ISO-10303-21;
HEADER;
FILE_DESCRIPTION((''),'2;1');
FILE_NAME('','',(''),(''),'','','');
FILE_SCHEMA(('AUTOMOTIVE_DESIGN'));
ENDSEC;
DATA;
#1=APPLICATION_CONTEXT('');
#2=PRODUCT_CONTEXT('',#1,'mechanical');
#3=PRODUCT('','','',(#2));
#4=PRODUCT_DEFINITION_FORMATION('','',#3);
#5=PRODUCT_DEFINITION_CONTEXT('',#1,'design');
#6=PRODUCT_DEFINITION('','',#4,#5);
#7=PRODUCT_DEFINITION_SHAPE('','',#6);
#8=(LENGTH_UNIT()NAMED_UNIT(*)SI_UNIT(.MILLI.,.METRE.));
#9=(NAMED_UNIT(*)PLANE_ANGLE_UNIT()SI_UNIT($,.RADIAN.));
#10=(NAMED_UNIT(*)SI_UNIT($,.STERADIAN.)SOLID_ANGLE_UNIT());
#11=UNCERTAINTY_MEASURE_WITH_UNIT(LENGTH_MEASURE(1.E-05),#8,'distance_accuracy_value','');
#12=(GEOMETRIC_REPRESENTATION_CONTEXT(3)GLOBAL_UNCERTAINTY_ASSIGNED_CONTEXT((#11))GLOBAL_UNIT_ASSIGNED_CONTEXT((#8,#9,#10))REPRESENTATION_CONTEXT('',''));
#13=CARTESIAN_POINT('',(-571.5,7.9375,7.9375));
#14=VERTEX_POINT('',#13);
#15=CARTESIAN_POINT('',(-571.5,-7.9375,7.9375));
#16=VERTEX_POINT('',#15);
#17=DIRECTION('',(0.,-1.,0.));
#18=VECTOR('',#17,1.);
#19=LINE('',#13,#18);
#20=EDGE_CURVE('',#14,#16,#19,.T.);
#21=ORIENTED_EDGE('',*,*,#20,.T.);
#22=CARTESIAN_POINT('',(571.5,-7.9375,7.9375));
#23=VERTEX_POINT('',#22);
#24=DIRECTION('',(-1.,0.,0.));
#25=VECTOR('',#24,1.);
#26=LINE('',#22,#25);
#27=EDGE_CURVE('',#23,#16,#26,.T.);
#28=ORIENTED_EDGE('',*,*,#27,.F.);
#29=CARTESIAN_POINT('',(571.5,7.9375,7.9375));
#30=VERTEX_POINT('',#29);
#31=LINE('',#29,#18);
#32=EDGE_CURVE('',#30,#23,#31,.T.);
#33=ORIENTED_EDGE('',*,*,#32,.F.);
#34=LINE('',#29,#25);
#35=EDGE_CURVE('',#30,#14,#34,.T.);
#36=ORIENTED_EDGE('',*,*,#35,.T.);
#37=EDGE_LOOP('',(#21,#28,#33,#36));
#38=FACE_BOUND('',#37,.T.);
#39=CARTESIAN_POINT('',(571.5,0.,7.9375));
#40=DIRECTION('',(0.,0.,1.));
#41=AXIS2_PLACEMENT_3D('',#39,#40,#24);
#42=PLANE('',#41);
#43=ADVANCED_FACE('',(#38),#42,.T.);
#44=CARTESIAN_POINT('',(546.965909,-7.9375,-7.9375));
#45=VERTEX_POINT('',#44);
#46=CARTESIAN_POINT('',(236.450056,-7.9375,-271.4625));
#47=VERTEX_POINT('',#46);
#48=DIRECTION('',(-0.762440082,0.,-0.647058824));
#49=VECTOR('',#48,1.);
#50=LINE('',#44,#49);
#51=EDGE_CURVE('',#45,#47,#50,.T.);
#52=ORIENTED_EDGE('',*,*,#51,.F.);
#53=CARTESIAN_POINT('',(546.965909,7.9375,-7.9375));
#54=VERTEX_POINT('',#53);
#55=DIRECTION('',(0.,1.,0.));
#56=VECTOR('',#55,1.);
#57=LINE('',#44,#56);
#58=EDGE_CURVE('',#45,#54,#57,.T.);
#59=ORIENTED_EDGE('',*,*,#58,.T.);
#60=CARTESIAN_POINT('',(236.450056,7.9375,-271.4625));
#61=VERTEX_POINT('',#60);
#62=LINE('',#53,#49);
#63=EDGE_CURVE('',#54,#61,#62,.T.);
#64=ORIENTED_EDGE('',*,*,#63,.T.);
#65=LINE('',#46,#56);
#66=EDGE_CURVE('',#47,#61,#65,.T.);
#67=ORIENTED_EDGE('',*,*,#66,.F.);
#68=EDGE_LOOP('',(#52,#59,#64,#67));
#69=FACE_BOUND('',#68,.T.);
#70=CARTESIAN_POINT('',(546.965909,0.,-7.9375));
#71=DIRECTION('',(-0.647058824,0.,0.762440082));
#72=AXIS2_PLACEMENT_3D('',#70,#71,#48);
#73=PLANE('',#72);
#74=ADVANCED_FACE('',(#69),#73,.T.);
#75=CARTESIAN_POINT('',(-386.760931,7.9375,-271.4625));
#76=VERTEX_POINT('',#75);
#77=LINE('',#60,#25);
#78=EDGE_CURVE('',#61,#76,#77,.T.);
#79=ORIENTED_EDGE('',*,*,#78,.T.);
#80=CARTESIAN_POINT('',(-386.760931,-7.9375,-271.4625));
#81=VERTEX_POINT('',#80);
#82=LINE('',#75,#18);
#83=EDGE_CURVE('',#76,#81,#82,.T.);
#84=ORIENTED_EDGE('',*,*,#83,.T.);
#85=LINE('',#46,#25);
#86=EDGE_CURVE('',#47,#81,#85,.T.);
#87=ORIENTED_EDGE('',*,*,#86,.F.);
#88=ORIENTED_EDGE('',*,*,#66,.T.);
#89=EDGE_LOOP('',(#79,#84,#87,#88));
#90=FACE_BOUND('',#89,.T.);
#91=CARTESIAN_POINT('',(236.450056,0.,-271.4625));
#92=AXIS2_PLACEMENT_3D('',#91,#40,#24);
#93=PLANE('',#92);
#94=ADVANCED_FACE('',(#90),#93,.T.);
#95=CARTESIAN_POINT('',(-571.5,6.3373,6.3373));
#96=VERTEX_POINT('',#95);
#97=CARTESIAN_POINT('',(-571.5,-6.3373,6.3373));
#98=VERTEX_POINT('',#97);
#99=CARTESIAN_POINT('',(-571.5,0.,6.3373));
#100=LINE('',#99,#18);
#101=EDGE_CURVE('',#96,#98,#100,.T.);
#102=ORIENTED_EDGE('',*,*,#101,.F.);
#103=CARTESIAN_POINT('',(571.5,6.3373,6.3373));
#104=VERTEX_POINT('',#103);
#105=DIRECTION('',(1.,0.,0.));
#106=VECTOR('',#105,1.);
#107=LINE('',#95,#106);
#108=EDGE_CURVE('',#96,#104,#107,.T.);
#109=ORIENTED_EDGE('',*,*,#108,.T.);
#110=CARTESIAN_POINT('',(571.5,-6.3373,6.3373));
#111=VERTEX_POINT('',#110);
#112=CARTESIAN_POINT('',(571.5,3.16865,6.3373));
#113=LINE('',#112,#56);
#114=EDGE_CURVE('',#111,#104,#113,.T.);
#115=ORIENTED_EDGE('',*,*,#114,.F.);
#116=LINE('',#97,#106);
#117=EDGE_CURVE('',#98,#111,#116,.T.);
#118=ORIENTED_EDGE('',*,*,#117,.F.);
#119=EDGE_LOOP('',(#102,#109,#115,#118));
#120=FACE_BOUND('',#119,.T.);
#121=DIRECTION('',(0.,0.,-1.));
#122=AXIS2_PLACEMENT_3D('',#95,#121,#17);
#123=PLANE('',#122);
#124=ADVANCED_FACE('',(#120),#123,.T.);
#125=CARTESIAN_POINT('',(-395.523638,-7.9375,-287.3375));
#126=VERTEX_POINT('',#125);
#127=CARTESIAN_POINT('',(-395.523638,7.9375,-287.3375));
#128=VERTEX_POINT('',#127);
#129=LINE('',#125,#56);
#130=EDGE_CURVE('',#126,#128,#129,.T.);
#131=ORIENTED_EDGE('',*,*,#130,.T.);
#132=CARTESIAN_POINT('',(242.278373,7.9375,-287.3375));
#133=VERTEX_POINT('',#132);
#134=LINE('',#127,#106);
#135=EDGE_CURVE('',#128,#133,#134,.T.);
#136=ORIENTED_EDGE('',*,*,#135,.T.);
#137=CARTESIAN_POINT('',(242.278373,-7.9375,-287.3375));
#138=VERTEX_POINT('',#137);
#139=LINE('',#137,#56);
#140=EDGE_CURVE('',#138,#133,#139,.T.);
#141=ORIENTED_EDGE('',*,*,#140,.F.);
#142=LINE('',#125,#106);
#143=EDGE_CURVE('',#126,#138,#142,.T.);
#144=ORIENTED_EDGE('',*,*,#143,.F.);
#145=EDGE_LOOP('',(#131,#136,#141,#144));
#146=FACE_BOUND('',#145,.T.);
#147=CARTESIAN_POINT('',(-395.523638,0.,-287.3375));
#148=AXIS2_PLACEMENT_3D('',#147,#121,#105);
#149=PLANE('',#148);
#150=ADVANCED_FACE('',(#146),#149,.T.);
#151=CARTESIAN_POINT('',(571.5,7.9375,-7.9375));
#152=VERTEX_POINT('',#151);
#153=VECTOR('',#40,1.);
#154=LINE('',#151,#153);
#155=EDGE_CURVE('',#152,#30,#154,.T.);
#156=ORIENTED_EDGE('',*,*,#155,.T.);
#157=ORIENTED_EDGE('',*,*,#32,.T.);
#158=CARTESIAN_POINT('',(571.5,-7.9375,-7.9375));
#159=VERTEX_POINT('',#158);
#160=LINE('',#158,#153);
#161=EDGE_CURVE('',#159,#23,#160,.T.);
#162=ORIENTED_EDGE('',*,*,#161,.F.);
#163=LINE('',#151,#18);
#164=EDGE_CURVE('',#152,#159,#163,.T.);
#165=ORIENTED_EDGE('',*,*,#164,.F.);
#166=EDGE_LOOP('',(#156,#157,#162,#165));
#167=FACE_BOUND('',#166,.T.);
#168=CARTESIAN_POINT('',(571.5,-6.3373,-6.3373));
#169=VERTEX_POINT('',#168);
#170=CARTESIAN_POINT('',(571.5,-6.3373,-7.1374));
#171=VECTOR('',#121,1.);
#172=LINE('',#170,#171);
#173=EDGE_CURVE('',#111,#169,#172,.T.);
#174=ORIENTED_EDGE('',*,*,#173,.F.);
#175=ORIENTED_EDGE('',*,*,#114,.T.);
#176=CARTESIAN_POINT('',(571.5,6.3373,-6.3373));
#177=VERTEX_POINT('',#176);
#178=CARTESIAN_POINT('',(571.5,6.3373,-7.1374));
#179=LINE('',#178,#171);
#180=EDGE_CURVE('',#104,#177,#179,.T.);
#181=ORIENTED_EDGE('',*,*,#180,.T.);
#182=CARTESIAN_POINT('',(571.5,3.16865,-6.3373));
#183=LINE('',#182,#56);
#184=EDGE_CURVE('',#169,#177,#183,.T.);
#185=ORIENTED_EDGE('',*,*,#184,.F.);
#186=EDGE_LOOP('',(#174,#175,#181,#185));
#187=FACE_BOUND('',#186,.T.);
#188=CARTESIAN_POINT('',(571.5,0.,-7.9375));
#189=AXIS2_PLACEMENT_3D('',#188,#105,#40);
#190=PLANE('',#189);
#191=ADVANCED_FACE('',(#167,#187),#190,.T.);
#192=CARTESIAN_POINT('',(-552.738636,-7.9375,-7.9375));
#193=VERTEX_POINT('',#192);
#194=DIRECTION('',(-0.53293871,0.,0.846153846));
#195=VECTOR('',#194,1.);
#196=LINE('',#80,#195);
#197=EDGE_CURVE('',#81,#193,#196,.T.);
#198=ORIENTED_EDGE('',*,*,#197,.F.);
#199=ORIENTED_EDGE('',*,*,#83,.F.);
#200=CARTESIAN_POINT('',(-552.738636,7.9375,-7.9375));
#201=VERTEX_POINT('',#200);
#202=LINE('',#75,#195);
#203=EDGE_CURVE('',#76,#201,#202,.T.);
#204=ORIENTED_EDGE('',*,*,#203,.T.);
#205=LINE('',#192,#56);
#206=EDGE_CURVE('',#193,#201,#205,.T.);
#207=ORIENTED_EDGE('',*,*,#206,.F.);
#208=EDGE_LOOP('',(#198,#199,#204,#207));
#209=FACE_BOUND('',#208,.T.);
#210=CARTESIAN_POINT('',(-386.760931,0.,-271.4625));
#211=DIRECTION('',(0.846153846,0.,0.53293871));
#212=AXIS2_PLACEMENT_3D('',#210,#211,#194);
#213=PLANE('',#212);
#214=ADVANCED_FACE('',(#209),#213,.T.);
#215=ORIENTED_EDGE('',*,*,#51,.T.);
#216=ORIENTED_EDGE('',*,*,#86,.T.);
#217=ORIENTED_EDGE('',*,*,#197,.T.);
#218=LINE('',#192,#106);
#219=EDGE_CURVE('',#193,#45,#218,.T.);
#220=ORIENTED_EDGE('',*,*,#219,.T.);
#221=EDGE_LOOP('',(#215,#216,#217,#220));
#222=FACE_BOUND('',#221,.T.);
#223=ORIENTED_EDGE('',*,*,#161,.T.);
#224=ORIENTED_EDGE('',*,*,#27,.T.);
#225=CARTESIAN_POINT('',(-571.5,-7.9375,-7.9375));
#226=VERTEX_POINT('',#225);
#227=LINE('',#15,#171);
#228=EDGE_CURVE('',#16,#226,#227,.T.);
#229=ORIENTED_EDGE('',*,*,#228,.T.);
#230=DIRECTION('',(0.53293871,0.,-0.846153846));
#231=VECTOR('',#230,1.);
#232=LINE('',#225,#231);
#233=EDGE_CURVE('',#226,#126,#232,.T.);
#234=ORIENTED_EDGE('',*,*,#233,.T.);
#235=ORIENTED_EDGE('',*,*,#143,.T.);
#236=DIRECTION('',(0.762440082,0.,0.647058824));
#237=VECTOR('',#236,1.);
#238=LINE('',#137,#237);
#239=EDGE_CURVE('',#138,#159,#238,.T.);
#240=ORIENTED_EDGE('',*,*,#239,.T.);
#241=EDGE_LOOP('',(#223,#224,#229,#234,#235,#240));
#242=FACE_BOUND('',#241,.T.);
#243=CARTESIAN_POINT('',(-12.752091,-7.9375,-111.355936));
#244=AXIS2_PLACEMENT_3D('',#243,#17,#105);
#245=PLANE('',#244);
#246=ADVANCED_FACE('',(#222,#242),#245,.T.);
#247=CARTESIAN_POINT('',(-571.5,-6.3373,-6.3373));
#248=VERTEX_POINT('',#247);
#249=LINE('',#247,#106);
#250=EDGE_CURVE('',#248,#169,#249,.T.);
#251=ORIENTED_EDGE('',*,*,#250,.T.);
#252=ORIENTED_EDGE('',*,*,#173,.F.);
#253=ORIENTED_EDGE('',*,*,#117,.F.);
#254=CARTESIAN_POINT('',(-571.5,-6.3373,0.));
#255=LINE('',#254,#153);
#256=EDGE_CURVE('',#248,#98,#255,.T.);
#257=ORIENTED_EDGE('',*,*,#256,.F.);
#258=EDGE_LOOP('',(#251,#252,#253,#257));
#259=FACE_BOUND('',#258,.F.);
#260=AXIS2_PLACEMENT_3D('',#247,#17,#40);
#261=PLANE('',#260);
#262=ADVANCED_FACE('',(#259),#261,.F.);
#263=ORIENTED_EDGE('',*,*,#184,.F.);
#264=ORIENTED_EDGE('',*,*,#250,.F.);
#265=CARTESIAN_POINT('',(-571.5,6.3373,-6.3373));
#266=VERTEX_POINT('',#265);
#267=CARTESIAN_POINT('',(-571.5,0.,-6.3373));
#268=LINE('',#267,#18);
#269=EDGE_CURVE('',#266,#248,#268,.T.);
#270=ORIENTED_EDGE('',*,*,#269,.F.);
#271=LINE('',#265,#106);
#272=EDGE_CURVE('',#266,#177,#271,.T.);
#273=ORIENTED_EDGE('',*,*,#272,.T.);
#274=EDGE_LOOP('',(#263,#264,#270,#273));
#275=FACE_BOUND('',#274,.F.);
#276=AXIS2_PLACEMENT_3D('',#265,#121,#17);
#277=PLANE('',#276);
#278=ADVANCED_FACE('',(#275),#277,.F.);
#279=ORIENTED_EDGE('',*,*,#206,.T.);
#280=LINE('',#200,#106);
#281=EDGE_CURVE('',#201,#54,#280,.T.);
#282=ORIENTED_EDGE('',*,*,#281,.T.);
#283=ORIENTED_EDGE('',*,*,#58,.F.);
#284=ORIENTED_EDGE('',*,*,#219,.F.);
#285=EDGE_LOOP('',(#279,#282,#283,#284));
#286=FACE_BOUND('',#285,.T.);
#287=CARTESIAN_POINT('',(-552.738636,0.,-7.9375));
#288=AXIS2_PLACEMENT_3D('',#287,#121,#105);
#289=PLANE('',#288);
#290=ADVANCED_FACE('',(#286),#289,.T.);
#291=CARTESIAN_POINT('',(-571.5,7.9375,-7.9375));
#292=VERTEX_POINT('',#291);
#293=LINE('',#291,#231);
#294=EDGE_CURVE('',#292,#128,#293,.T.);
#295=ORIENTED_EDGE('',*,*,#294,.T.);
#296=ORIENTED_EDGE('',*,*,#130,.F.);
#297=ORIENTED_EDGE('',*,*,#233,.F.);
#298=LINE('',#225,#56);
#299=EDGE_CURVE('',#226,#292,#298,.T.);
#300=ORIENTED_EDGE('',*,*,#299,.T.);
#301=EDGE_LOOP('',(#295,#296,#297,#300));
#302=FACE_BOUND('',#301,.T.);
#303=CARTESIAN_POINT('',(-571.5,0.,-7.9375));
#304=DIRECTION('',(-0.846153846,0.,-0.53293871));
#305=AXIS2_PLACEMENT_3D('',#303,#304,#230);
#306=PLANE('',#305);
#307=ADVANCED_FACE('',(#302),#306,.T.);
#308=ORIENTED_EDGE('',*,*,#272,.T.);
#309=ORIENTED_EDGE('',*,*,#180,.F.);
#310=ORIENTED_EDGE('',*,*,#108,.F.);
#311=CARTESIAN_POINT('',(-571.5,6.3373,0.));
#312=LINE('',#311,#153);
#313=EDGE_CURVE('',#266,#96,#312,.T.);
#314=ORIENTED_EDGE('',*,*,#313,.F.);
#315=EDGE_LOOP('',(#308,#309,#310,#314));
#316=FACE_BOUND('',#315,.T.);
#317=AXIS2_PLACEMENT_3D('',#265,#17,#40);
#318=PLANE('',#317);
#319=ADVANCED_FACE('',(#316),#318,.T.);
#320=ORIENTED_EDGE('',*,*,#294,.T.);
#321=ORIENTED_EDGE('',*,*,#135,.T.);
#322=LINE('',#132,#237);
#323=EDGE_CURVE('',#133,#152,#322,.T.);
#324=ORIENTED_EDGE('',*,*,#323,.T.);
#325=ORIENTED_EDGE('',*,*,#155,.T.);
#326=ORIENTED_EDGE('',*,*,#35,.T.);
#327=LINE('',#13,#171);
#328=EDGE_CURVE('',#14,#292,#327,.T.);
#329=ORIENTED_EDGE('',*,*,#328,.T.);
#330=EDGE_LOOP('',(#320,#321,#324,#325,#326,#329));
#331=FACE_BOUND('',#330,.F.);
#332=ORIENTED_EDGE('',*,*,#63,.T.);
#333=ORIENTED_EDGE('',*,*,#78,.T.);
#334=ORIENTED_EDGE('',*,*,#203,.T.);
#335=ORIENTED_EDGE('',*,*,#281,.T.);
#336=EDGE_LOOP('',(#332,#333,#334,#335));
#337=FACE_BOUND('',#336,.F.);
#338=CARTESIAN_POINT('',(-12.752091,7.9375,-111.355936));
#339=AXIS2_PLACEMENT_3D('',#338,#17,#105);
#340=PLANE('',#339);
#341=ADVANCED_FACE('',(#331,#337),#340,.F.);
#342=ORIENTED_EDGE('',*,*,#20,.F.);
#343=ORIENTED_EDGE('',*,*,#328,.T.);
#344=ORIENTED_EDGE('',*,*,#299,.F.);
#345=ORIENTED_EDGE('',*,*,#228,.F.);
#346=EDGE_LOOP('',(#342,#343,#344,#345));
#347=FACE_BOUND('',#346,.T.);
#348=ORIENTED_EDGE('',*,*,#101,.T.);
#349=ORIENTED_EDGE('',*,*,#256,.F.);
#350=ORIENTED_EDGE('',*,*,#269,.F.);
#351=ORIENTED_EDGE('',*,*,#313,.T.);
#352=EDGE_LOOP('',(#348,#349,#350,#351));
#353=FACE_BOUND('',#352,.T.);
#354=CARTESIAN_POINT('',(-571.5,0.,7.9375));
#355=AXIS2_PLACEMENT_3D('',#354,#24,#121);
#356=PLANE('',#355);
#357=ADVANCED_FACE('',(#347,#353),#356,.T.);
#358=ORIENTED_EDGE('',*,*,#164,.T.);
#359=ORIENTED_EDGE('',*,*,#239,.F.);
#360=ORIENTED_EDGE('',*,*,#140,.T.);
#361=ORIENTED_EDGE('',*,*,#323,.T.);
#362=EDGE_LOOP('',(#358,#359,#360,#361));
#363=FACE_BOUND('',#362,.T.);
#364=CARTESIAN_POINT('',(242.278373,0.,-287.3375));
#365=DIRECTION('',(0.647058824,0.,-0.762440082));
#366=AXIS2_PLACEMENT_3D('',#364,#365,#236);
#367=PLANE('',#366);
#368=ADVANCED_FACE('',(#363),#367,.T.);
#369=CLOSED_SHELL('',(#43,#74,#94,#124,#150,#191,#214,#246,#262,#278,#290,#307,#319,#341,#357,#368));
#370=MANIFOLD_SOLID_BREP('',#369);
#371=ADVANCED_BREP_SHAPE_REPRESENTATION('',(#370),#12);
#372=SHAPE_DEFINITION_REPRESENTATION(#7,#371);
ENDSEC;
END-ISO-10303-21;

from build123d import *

# Parameters (mm, degrees)
F1_DEPTH      = 7.9375
F2_W          = 12.6746
F2_H          = 12.6746
F3_DEPTH      = 1143.001
F3_DEPTH_BACK = 1751


# Not quite as in the source:
# - an extrude ends at something that could not be found from the text; its depth is read off the source's solid


with BuildPart() as f1:
    # F0 (on Front) → F1 (new body, symmetric)
    with BuildSketch(Plane.XZ):
        Polygon((242.2783725209, -287.3375), (571.5, -7.9375), (571.5, 7.9375), (-571.5, 7.9375), (-571.5, -7.9375), (-395.523637951, -287.3375), align=None)
        Polygon((-386.7609312492, -271.4625), (-552.7386363636, -7.9375), (546.9659090909, -7.9375), (236.4500559004, -271.4625), align=None, mode=Mode.SUBTRACT)
    extrude(amount=F1_DEPTH, both=True)

    # F2 (on face) → F3 (cut, two sides)
    with BuildSketch(Plane(origin=(-571.5, 0, 0), x_dir=(0, -1, 0), z_dir=(-1, 0, 0))) as f3_sk:
        Rectangle(F2_W, F2_H)
    extrude(amount=-F3_DEPTH, mode=Mode.SUBTRACT)
    extrude(f3_sk.sketch, amount=F3_DEPTH_BACK, mode=Mode.SUBTRACT)


solid = f1.part
